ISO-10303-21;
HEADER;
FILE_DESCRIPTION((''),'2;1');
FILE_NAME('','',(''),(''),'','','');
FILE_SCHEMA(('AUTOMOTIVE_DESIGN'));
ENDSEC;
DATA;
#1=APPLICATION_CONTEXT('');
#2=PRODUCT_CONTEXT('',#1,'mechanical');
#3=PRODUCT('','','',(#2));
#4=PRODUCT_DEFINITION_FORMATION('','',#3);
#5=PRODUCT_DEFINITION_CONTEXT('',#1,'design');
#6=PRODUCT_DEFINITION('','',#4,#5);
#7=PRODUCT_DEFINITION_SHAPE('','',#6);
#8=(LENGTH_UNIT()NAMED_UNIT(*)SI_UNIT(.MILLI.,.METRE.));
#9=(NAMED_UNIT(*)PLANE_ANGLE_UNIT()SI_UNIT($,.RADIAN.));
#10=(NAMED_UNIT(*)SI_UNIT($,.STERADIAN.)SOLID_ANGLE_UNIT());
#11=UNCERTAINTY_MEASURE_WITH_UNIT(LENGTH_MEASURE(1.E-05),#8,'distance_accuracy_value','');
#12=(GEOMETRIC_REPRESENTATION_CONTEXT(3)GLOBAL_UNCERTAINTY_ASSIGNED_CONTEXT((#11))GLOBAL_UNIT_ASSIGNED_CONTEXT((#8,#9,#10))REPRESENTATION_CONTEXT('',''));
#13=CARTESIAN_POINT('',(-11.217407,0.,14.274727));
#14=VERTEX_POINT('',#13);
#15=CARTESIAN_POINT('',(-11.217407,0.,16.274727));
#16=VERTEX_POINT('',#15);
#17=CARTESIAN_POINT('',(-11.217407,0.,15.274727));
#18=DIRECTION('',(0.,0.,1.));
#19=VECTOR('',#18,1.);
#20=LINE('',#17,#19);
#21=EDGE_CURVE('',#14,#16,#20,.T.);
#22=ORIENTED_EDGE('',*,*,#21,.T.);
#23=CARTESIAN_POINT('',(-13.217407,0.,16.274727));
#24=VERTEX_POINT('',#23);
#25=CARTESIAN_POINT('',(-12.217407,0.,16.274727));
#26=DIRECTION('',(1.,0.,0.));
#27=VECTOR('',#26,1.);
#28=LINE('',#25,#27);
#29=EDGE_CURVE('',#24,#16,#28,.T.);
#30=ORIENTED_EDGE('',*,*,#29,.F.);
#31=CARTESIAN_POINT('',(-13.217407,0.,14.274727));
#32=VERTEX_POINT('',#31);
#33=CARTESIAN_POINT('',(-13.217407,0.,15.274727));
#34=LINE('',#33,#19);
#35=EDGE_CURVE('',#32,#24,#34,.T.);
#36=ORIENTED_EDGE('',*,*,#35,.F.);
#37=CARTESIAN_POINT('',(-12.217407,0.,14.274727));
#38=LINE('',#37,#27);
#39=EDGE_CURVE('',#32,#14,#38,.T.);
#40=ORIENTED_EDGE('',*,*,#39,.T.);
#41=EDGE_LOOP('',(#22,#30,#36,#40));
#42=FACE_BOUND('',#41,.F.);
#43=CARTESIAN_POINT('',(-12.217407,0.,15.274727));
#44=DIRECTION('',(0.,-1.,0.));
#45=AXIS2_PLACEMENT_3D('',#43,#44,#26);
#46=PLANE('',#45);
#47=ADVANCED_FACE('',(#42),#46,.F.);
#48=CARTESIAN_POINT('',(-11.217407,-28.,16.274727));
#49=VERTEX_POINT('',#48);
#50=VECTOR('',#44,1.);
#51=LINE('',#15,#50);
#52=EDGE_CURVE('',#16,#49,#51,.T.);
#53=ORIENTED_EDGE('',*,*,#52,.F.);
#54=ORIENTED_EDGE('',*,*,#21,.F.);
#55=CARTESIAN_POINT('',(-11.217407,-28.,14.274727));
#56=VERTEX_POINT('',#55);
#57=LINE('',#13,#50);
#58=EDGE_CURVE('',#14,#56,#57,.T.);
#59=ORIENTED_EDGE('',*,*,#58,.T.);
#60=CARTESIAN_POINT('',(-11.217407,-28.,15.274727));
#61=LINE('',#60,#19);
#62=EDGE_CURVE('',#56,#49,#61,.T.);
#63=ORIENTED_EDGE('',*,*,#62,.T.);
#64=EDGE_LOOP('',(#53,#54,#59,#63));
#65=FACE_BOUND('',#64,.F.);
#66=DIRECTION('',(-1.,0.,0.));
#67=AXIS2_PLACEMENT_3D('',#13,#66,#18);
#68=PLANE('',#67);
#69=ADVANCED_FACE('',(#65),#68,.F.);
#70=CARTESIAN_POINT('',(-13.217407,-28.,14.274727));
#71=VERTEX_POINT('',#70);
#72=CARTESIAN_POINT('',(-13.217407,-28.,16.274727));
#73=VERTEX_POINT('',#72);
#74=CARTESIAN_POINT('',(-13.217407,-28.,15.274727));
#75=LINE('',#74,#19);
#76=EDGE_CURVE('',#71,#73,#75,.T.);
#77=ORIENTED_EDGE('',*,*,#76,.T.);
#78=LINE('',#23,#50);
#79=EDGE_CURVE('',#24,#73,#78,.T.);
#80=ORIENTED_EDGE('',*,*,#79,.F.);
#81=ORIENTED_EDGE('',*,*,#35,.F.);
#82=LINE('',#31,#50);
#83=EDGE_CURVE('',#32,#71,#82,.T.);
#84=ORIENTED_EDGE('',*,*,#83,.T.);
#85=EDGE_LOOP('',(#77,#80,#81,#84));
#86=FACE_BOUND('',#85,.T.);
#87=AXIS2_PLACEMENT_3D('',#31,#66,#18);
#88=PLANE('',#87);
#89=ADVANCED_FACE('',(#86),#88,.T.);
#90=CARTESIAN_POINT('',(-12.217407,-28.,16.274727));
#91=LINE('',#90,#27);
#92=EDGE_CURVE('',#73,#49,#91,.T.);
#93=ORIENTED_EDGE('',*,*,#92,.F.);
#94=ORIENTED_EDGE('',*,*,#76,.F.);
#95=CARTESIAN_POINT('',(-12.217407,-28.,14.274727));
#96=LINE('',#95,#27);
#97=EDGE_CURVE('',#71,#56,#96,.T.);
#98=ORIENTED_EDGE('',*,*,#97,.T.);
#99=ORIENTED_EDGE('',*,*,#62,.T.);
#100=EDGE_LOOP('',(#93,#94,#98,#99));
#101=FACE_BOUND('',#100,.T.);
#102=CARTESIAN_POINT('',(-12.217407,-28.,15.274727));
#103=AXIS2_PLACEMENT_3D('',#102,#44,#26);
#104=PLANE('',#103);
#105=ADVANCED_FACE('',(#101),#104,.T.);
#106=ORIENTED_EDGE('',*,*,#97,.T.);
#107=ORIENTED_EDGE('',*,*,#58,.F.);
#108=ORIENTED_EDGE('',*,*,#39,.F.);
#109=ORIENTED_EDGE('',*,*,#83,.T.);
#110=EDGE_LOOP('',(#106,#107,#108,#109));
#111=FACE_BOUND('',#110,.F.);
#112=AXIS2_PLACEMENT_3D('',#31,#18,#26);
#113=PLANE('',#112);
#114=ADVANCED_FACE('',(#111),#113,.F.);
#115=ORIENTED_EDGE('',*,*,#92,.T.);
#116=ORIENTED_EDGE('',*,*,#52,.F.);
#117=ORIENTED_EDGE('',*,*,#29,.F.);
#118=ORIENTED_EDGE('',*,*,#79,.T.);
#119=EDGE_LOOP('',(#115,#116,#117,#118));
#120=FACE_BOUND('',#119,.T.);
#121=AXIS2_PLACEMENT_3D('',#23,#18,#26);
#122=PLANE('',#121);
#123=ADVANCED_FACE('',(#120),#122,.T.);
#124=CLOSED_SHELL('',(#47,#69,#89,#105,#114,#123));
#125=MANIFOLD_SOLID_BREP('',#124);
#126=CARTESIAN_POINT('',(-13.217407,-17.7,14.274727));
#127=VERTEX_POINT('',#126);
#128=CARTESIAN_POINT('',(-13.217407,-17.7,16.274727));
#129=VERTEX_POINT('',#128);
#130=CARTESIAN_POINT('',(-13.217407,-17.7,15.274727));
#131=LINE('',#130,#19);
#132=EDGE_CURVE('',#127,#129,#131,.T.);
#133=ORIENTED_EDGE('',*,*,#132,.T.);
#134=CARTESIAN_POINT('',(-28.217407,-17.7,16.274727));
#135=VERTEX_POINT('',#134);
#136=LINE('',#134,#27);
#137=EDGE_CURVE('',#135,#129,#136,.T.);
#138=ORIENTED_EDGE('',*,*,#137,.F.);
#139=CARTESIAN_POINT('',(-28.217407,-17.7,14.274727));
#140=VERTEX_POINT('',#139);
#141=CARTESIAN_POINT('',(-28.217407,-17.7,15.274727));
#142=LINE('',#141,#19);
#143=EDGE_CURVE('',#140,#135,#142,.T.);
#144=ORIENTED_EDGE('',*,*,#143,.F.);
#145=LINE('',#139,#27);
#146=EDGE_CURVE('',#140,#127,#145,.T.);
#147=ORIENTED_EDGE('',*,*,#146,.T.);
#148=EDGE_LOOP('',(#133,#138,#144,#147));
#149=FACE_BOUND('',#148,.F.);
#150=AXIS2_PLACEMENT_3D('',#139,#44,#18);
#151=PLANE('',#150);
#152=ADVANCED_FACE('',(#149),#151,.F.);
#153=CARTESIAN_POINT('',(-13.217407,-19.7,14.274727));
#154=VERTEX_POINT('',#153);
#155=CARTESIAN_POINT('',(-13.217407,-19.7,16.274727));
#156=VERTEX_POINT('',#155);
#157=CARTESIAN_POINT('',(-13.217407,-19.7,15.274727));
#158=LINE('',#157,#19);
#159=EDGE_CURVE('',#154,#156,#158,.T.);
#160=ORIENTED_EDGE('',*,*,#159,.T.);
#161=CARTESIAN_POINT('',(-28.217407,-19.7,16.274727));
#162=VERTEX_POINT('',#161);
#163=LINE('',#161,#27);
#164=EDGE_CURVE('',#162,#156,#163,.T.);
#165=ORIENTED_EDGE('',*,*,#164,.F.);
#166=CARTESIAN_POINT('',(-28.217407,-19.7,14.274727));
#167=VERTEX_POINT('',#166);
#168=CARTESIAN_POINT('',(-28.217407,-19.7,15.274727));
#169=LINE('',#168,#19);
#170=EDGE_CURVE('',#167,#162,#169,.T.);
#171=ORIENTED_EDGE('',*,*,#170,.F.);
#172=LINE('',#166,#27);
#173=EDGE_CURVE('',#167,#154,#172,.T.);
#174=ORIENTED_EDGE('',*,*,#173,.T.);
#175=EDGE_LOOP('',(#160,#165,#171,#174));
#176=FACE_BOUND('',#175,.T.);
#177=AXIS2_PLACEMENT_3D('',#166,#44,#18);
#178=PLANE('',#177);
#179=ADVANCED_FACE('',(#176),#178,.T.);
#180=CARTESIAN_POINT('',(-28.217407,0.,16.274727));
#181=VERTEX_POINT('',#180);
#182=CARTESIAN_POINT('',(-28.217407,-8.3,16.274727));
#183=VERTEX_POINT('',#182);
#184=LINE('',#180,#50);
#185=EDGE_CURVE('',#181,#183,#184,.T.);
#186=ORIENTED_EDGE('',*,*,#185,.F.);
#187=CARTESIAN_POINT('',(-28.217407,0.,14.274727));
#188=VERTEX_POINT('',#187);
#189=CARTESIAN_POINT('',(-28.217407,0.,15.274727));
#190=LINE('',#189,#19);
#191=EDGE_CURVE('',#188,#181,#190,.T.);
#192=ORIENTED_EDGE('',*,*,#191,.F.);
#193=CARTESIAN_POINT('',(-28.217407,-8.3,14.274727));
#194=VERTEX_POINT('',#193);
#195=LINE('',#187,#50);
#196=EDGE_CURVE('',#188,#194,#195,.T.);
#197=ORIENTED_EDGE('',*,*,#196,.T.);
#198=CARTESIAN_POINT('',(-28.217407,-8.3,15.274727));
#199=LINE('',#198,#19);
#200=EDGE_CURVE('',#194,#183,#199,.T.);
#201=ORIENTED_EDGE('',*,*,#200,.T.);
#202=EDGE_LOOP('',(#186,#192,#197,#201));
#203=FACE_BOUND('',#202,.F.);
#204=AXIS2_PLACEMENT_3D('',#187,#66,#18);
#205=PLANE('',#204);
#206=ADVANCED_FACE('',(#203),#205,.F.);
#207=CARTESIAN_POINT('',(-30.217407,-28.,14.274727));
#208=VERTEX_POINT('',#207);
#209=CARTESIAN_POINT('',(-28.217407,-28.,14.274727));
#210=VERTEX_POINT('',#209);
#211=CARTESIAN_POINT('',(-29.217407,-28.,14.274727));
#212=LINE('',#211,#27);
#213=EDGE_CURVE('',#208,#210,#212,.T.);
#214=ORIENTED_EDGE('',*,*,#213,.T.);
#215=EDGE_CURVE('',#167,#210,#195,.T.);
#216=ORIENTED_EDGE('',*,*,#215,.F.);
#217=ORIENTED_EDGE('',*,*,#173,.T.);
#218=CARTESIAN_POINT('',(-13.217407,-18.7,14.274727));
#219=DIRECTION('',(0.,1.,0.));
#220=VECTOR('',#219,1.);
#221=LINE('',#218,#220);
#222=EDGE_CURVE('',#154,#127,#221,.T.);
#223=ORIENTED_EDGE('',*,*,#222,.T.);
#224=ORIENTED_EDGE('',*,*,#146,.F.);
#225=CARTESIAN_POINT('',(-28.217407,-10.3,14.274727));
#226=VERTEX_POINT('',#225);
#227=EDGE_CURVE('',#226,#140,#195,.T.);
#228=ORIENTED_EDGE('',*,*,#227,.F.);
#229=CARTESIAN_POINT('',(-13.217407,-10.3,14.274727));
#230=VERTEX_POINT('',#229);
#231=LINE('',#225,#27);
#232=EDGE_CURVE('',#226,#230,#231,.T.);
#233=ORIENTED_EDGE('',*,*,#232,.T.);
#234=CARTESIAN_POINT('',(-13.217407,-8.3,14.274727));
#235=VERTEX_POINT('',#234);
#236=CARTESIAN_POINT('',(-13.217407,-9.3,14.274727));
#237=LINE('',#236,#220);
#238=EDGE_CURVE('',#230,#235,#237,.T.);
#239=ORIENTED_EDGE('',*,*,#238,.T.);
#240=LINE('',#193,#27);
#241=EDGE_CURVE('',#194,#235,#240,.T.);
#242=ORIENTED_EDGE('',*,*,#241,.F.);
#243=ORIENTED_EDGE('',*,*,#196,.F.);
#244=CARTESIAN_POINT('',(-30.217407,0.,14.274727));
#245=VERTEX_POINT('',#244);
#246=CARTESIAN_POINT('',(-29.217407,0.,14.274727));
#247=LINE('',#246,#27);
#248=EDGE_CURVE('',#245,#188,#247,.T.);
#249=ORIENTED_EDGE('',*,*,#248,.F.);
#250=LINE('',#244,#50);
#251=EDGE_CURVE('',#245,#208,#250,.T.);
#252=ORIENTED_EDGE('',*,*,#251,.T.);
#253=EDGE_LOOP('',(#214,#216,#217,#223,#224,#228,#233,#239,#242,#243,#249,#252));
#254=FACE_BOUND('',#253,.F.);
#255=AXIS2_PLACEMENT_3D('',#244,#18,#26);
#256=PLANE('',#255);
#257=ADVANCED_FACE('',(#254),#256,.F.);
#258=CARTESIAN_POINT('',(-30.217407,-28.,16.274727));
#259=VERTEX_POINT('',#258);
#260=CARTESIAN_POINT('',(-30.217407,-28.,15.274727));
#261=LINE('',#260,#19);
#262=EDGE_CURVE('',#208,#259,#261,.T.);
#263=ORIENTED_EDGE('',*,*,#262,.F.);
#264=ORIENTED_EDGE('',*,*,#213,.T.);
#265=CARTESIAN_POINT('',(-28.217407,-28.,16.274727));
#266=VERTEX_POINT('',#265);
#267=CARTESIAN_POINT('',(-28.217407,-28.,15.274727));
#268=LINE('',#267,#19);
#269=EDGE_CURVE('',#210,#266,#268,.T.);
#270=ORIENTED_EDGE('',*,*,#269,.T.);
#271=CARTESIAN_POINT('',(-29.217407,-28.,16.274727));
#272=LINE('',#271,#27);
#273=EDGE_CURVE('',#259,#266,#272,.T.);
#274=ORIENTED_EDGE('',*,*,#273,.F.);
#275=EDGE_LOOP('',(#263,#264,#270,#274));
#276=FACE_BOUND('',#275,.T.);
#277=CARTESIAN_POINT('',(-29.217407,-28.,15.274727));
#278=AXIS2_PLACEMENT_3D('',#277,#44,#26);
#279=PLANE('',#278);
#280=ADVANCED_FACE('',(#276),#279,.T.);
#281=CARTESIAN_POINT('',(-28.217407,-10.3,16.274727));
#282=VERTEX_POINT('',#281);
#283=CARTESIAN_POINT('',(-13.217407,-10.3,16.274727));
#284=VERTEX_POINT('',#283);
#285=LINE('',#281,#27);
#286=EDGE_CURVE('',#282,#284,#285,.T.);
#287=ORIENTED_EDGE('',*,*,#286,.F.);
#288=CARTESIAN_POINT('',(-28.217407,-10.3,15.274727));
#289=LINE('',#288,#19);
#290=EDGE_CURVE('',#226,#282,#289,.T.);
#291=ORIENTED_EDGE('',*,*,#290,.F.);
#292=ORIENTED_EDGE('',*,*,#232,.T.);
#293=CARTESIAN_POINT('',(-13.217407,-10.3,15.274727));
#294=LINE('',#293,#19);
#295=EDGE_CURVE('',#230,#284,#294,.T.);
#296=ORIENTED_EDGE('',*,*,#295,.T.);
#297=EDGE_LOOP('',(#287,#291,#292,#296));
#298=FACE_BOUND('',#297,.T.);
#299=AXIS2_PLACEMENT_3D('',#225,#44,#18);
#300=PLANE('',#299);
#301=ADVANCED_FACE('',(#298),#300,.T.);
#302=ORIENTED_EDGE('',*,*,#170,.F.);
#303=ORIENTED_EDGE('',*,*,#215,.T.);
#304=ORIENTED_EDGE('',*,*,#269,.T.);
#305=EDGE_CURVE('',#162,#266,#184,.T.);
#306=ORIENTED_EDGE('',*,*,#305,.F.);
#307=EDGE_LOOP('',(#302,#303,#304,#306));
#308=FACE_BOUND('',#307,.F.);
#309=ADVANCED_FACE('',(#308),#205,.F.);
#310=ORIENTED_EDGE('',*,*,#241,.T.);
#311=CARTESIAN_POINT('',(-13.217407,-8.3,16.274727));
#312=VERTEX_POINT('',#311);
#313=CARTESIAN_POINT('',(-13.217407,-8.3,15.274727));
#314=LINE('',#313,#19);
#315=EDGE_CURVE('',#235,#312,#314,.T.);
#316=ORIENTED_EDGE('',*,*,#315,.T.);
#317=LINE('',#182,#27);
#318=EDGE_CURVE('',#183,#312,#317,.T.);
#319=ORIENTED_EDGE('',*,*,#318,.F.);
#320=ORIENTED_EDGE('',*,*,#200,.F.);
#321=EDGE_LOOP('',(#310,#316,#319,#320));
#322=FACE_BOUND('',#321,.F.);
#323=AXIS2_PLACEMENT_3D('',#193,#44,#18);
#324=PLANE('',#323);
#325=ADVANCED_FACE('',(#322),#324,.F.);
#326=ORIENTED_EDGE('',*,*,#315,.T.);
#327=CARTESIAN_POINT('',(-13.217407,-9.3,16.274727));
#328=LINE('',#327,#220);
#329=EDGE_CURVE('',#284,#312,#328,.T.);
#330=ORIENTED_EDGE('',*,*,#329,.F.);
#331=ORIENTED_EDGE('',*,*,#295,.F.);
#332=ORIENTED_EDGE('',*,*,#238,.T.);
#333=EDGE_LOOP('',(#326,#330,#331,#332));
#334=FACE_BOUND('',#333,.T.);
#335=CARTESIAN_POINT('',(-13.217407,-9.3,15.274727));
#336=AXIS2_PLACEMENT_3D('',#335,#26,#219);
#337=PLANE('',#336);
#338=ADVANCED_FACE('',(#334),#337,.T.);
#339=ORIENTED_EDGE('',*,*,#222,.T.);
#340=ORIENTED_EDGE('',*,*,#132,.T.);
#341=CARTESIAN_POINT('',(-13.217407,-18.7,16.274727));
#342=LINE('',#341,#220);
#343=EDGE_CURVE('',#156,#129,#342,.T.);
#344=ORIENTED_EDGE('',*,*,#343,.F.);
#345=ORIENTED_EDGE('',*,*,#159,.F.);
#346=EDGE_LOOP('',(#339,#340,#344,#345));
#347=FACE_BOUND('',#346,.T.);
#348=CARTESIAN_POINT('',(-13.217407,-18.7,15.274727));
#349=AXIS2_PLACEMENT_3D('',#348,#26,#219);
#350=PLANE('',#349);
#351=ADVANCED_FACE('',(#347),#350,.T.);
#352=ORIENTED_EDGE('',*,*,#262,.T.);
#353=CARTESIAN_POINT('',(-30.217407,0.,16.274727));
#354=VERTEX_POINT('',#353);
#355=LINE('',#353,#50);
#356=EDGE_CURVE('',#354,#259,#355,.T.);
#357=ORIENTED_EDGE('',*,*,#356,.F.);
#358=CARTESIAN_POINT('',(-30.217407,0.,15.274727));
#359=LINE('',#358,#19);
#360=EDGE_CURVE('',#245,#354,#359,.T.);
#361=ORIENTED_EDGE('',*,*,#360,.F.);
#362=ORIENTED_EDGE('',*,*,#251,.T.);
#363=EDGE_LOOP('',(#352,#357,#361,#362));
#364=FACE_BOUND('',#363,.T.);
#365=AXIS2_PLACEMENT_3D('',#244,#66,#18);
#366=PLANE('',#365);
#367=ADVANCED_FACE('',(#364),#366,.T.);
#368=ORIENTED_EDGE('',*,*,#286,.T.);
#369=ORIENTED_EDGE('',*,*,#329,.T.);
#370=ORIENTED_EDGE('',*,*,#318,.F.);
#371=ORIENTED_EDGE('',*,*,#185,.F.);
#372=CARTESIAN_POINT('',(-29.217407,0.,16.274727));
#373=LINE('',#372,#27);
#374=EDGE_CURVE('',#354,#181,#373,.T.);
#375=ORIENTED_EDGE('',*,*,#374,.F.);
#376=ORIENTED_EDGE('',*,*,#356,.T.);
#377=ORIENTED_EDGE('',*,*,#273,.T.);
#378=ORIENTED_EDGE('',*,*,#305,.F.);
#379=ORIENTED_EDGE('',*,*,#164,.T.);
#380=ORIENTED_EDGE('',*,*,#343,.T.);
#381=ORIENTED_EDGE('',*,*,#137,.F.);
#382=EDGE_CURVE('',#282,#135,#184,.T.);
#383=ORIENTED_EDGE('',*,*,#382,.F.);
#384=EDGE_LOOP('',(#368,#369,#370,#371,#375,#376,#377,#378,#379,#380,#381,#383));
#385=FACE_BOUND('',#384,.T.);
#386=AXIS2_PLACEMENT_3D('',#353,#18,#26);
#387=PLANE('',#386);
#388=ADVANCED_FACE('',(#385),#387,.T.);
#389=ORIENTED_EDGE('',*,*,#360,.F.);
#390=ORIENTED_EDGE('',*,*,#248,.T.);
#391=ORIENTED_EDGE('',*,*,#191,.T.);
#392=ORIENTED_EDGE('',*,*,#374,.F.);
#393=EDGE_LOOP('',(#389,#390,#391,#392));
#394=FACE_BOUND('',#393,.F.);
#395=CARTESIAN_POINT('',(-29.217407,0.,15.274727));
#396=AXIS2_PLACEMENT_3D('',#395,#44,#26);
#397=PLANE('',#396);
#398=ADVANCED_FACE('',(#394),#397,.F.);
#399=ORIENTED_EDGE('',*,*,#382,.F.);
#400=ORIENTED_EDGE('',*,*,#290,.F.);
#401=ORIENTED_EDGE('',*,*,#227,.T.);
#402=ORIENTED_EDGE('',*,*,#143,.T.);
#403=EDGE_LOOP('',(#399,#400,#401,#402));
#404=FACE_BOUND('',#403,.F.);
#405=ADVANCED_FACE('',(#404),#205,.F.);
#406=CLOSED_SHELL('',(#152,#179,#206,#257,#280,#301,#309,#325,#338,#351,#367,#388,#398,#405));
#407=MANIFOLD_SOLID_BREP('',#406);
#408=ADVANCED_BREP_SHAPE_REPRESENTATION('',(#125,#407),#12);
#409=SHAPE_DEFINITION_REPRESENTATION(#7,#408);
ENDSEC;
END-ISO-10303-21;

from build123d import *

# Parameters (mm, degrees)
F0_W     = 2
F0_H     = 2
F1_DEPTH = 28
F2_W     = 2
F2_H     = 2
F3_DEPTH = 15


# Not quite as in the source:
# - a feature names something its author has since deleted; it is built from what else it names


with BuildPart() as f1:
    # F0 (on Front) → F1 (new body)
    with BuildSketch(Plane.XZ):
        with Locations((-29.2174071148, 15.274727294)):
            Rectangle(F0_W, F0_H)
    extrude(amount=F1_DEPTH)

    # F2 (on face) → F3 (join)
    with BuildSketch(Plane.YZ.offset(-28.2174071148)):
        with Locations((-18.7, 15.274727294)):
            Rectangle(F2_W, F2_H)
        with Locations((-9.3, 15.274727294)):
            Rectangle(F2_W, F2_H)
    extrude(amount=F3_DEPTH)


with BuildPart() as f1b:
    # F0 (on Front) → F1, piece 2 (new body)
    with BuildSketch(Plane.XZ):
        with Locations((-12.2174071148, 15.274727294)):
            Rectangle(F0_W, F0_H)
    extrude(amount=F1_DEPTH)


solid = Compound([f1.part, f1b.part])
